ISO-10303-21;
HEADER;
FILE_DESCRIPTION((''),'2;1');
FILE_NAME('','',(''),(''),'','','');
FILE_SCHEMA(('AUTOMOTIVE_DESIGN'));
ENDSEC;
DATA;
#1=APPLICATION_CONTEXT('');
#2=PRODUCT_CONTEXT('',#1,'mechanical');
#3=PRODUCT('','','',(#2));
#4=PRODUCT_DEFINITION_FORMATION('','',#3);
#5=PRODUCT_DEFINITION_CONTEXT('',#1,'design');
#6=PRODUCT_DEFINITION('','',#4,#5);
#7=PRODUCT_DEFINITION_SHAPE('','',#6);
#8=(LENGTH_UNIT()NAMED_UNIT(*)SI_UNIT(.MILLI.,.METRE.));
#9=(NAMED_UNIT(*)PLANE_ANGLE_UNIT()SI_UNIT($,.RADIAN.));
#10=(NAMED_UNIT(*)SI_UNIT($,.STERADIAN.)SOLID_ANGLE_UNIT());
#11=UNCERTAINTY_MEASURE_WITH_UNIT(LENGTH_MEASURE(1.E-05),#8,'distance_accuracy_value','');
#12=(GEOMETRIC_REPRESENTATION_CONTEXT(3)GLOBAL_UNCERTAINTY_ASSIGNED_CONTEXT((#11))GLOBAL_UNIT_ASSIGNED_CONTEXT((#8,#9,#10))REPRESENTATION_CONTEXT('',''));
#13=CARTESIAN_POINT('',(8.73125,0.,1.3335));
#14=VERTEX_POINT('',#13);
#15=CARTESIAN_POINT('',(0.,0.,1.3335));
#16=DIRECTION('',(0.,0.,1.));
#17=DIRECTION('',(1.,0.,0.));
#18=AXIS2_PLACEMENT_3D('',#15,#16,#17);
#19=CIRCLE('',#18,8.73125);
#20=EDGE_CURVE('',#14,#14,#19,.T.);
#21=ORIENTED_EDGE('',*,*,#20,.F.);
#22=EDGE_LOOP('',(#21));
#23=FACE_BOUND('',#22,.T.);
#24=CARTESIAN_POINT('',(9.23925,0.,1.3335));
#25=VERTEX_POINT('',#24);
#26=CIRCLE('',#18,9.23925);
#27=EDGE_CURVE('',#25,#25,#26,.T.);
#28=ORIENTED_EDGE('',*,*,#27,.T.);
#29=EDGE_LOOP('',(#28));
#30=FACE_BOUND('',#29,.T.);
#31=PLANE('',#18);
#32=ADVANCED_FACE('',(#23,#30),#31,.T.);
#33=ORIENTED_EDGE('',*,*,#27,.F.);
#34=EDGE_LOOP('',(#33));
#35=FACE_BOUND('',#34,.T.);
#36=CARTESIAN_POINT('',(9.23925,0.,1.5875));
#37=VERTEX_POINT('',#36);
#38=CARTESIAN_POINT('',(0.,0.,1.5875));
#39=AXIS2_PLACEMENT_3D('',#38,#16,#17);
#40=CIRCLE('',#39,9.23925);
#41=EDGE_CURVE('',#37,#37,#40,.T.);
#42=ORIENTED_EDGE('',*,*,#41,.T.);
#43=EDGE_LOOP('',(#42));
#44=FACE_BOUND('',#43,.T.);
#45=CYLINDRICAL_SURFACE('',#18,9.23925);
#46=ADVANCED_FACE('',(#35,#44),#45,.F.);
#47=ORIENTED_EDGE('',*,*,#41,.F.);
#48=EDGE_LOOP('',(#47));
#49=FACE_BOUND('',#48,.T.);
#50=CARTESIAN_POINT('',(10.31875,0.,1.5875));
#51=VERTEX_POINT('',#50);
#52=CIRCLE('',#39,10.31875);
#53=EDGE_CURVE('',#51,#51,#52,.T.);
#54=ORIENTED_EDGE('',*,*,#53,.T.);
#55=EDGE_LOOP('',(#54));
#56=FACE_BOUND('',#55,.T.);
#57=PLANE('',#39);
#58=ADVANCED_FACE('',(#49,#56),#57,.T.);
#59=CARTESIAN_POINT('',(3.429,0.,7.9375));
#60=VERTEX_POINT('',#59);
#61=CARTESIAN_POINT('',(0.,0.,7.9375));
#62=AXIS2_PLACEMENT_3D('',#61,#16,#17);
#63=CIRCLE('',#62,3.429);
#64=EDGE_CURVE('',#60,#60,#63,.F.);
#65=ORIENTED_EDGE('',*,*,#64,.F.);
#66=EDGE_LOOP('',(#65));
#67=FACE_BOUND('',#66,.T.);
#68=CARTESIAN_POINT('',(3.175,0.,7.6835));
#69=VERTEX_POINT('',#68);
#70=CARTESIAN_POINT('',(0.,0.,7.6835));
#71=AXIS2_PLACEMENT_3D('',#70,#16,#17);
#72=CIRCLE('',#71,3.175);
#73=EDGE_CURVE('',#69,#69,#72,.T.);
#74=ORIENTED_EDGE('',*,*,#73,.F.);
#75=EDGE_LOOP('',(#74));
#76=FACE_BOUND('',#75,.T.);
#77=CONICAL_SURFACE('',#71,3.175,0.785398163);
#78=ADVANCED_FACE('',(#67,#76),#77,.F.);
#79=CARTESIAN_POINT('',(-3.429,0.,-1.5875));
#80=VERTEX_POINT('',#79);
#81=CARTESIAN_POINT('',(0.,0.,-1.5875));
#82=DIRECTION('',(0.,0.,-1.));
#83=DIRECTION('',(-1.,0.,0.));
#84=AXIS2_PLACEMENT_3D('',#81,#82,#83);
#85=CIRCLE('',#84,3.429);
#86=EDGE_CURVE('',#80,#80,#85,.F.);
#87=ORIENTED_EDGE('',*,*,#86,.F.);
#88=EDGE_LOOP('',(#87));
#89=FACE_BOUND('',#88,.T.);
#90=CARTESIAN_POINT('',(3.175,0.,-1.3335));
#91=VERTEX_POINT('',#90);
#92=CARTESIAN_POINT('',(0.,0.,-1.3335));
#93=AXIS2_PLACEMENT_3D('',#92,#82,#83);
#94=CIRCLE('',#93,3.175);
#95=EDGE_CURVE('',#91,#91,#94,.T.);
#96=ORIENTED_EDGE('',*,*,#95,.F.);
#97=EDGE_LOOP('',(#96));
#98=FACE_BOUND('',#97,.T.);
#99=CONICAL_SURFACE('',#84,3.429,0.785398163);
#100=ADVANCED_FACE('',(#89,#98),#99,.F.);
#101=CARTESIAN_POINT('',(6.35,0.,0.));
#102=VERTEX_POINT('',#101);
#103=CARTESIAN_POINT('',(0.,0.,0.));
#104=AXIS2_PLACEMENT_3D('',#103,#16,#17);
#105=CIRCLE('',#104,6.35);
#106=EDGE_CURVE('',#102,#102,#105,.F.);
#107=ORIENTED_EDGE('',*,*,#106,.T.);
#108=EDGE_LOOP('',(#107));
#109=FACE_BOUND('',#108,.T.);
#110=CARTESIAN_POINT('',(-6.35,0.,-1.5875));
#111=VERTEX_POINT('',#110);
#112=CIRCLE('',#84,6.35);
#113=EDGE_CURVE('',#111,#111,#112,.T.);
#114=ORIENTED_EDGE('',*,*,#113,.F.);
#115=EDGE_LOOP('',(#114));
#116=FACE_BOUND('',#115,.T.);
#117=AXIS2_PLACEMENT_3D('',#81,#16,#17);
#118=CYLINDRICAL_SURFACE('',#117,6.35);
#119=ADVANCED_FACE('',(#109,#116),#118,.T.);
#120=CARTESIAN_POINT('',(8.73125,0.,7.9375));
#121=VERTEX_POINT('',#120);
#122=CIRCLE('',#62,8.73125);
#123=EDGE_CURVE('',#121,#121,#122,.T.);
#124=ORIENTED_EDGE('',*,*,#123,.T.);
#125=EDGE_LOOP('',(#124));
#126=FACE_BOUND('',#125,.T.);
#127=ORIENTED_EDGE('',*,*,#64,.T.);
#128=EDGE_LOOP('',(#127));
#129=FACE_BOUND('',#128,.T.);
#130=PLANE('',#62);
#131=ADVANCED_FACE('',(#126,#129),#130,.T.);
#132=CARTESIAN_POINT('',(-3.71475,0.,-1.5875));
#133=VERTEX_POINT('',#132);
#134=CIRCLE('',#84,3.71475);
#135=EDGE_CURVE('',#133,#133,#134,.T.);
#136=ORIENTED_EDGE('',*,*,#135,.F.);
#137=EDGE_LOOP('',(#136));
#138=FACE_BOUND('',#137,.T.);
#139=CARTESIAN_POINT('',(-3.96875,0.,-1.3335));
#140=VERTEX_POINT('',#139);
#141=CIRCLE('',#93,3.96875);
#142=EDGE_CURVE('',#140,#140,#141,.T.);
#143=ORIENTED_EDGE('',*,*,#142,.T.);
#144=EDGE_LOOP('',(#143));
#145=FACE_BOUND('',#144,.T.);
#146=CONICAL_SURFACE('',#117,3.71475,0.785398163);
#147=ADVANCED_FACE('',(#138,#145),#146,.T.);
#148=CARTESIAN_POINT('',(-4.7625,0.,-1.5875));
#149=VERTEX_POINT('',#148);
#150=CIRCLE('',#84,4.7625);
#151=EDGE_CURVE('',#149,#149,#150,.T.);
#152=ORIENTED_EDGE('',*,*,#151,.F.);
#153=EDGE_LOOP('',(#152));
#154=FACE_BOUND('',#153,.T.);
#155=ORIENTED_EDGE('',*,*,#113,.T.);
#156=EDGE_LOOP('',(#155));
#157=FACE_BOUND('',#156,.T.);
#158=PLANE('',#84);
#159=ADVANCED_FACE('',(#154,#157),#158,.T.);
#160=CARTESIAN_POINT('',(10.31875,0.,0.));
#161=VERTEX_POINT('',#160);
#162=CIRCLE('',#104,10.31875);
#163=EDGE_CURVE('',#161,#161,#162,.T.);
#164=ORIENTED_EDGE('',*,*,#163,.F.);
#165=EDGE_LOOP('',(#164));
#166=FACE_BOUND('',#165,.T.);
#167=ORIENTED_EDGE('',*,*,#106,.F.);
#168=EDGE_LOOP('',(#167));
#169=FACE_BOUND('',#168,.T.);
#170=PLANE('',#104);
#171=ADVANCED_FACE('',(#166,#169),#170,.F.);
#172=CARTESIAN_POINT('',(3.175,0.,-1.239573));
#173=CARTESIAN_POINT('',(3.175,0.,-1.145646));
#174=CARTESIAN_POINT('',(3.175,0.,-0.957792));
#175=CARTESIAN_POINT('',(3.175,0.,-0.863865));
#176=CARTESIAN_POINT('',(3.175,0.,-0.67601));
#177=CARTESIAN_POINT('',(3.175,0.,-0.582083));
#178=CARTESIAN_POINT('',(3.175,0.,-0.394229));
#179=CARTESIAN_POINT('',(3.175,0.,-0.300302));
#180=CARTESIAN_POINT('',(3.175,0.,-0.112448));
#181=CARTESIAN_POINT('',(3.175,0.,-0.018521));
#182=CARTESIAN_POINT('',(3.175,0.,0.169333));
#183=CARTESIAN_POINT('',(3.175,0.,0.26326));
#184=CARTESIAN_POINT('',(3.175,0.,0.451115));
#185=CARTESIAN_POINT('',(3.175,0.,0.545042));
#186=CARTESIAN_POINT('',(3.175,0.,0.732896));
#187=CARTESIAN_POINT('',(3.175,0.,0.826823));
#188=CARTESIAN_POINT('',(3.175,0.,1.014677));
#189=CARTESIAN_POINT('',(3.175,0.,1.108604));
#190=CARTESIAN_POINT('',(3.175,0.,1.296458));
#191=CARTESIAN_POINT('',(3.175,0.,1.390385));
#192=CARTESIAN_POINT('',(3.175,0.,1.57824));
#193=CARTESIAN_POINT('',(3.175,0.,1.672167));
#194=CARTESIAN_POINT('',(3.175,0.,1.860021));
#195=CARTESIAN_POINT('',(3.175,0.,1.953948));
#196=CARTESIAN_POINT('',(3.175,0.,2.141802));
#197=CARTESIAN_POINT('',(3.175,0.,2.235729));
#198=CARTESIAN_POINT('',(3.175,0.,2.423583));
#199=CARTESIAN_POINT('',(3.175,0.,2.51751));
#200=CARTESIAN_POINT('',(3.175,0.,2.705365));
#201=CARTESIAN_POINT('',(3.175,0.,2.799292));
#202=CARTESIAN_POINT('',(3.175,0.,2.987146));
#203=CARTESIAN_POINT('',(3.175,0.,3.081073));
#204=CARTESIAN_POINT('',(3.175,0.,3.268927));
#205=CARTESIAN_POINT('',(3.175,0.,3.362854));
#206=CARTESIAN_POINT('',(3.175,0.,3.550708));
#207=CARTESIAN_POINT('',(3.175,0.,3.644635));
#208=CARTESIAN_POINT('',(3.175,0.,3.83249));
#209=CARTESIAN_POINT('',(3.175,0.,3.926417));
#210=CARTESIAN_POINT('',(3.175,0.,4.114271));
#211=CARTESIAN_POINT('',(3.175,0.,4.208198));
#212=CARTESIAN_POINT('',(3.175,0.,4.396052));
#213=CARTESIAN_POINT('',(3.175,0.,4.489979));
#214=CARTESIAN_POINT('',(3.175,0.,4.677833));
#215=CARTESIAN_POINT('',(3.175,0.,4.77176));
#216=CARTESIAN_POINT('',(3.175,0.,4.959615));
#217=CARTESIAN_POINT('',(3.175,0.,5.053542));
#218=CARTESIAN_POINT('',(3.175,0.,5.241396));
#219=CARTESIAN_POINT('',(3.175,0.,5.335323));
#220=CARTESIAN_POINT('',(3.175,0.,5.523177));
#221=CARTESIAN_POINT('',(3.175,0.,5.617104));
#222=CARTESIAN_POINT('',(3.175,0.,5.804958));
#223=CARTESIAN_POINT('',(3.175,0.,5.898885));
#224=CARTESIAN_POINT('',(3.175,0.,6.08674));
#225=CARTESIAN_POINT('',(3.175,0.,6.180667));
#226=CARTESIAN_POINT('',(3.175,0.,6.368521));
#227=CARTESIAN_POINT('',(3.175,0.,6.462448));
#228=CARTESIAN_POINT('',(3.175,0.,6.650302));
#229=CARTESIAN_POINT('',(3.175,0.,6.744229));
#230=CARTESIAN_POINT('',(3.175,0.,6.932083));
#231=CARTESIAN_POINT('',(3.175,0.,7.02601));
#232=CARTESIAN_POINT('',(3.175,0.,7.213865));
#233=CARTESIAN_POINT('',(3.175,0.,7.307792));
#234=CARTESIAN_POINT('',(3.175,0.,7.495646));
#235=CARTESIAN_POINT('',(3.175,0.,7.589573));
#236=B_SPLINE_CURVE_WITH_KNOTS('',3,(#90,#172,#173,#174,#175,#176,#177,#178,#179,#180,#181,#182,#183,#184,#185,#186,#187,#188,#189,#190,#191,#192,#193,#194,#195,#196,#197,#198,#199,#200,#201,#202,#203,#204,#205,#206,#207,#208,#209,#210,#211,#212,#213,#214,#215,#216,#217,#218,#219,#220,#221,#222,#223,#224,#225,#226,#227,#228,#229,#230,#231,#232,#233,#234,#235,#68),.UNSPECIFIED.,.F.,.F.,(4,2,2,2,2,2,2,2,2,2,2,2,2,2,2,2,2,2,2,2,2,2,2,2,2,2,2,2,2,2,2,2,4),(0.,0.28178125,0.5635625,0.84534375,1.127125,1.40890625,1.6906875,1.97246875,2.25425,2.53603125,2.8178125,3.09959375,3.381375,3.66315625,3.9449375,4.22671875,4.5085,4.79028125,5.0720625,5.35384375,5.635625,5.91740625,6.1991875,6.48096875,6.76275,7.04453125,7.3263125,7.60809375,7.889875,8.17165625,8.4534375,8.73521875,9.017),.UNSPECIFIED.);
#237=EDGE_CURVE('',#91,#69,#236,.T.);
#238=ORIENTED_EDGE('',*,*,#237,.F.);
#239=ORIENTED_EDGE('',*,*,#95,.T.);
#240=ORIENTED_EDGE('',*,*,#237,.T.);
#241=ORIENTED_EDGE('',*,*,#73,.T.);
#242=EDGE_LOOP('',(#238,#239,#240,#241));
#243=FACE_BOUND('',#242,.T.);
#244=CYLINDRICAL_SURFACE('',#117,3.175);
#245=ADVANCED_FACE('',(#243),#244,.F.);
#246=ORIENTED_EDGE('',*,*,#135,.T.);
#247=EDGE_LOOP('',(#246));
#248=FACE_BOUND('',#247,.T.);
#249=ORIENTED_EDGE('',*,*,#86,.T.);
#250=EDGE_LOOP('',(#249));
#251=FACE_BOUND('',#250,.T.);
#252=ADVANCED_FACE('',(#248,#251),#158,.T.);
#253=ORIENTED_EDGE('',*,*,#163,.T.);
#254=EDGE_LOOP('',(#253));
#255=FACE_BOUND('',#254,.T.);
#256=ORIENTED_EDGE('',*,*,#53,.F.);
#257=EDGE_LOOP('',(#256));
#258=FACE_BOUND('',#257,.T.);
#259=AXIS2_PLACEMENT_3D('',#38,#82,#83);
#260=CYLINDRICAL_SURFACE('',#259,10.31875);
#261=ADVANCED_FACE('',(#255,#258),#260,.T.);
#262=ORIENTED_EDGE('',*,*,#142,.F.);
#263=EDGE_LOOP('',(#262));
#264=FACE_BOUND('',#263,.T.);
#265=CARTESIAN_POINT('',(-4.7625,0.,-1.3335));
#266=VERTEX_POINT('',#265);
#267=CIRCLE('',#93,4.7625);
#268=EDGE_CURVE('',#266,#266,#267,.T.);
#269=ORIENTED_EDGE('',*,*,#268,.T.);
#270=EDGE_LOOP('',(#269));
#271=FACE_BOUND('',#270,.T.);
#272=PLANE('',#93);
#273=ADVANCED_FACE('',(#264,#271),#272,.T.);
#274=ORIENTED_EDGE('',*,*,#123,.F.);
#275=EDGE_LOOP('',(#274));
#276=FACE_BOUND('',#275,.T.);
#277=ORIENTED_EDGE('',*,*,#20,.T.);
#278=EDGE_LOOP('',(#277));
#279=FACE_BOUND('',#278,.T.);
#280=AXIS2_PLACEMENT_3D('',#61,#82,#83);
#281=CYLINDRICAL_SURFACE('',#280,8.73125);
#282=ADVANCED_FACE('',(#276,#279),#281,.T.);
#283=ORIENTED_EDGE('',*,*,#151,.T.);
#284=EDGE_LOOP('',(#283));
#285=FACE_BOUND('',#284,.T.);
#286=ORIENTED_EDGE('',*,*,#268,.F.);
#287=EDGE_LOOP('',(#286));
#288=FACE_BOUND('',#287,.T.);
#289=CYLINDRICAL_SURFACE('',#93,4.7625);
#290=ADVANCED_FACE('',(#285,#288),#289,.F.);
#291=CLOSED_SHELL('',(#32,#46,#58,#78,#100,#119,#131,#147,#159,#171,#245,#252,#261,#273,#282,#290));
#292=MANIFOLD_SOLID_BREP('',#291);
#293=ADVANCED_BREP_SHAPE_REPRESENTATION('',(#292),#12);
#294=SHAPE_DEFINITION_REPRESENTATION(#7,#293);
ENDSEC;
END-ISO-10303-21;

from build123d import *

# Parameters (mm, degrees)
SKETCH1_R           = 10.31875
BOSS_EXTRUDE1_DEPTH = 1.5875
SKETCH2_R           = 8.73125
BOSS_EXTRUDE2_DEPTH = 6.35
SKETCH3_R           = 6.35
BOSS_EXTRUDE3_DEPTH = 1.5875
SKETCH4_R           = 4.7625
SKETCH4_R_2         = 3.96875
CUT_EXTRUDE1_DEPTH  = 0.254
CUT_EXTRUDE2_START  = -0.254
SKETCH5_R           = 9.23925
SKETCH5_R_2         = 8.73125
CUT_EXTRUDE2_DEPTH  = 0.254
SKETCH6_R           = 3.175
CUT_EXTRUDE3_DEPTH  = 18.426383105
CHAMFER1_SIZE       = 0.254


with BuildPart() as part:
    # Sketch1 → Boss-Extrude1 (new body)
    with BuildSketch(Plane.XY):
        Circle(SKETCH1_R)
    extrude(amount=BOSS_EXTRUDE1_DEPTH)

    # Sketch2 → Boss-Extrude2 (add)
    with BuildSketch(Plane.XY.offset(1.5875)):
        Circle(SKETCH2_R)
    extrude(amount=BOSS_EXTRUDE2_DEPTH)

    # Sketch3 → Boss-Extrude3 (add)
    with BuildSketch(Plane(origin=(0, 0, 0), x_dir=(-1, 0, 0), z_dir=(0, 0, -1))):
        with Locations(Location((0, 0, 0), (0, 0, 180))):
            Circle(SKETCH3_R)
    extrude(amount=BOSS_EXTRUDE3_DEPTH)

    # Sketch4 → Cut-Extrude1 (cut)
    with BuildSketch(Plane(origin=(0, 0, -1.5875), x_dir=(-1, 0, 0), z_dir=(0, 0, -1))):
        Circle(SKETCH4_R)
        Circle(SKETCH4_R_2, mode=Mode.SUBTRACT)
    extrude(amount=-CUT_EXTRUDE1_DEPTH, mode=Mode.SUBTRACT)

    # Sketch5 → Cut-Extrude2 (cut)
    with BuildSketch(Plane.XY.offset(1.5875).offset(CUT_EXTRUDE2_START)):
        Circle(SKETCH5_R)
        Circle(SKETCH5_R_2, mode=Mode.SUBTRACT)
    extrude(amount=CUT_EXTRUDE2_DEPTH, mode=Mode.SUBTRACT)

    # Sketch6 → Cut-Extrude3 (cut, through all)
    with BuildSketch(Plane.XY.offset(7.9375)):
        Circle(SKETCH6_R)
    extrude(amount=-CUT_EXTRUDE3_DEPTH, mode=Mode.SUBTRACT)

    # Chamfer1
    chamfer1_edges = [part.edges().sort_by_distance(p)[0] for p in [
        (3.96875, 0, -1.5875),
        (-3.175, 0, -1.5875),
        (-3.175, 0, 7.9375),
    ]]
    chamfer(chamfer1_edges, length=CHAMFER1_SIZE - 0.0001)  # a hair under: the kernel refuses the full size


solid = part.part
